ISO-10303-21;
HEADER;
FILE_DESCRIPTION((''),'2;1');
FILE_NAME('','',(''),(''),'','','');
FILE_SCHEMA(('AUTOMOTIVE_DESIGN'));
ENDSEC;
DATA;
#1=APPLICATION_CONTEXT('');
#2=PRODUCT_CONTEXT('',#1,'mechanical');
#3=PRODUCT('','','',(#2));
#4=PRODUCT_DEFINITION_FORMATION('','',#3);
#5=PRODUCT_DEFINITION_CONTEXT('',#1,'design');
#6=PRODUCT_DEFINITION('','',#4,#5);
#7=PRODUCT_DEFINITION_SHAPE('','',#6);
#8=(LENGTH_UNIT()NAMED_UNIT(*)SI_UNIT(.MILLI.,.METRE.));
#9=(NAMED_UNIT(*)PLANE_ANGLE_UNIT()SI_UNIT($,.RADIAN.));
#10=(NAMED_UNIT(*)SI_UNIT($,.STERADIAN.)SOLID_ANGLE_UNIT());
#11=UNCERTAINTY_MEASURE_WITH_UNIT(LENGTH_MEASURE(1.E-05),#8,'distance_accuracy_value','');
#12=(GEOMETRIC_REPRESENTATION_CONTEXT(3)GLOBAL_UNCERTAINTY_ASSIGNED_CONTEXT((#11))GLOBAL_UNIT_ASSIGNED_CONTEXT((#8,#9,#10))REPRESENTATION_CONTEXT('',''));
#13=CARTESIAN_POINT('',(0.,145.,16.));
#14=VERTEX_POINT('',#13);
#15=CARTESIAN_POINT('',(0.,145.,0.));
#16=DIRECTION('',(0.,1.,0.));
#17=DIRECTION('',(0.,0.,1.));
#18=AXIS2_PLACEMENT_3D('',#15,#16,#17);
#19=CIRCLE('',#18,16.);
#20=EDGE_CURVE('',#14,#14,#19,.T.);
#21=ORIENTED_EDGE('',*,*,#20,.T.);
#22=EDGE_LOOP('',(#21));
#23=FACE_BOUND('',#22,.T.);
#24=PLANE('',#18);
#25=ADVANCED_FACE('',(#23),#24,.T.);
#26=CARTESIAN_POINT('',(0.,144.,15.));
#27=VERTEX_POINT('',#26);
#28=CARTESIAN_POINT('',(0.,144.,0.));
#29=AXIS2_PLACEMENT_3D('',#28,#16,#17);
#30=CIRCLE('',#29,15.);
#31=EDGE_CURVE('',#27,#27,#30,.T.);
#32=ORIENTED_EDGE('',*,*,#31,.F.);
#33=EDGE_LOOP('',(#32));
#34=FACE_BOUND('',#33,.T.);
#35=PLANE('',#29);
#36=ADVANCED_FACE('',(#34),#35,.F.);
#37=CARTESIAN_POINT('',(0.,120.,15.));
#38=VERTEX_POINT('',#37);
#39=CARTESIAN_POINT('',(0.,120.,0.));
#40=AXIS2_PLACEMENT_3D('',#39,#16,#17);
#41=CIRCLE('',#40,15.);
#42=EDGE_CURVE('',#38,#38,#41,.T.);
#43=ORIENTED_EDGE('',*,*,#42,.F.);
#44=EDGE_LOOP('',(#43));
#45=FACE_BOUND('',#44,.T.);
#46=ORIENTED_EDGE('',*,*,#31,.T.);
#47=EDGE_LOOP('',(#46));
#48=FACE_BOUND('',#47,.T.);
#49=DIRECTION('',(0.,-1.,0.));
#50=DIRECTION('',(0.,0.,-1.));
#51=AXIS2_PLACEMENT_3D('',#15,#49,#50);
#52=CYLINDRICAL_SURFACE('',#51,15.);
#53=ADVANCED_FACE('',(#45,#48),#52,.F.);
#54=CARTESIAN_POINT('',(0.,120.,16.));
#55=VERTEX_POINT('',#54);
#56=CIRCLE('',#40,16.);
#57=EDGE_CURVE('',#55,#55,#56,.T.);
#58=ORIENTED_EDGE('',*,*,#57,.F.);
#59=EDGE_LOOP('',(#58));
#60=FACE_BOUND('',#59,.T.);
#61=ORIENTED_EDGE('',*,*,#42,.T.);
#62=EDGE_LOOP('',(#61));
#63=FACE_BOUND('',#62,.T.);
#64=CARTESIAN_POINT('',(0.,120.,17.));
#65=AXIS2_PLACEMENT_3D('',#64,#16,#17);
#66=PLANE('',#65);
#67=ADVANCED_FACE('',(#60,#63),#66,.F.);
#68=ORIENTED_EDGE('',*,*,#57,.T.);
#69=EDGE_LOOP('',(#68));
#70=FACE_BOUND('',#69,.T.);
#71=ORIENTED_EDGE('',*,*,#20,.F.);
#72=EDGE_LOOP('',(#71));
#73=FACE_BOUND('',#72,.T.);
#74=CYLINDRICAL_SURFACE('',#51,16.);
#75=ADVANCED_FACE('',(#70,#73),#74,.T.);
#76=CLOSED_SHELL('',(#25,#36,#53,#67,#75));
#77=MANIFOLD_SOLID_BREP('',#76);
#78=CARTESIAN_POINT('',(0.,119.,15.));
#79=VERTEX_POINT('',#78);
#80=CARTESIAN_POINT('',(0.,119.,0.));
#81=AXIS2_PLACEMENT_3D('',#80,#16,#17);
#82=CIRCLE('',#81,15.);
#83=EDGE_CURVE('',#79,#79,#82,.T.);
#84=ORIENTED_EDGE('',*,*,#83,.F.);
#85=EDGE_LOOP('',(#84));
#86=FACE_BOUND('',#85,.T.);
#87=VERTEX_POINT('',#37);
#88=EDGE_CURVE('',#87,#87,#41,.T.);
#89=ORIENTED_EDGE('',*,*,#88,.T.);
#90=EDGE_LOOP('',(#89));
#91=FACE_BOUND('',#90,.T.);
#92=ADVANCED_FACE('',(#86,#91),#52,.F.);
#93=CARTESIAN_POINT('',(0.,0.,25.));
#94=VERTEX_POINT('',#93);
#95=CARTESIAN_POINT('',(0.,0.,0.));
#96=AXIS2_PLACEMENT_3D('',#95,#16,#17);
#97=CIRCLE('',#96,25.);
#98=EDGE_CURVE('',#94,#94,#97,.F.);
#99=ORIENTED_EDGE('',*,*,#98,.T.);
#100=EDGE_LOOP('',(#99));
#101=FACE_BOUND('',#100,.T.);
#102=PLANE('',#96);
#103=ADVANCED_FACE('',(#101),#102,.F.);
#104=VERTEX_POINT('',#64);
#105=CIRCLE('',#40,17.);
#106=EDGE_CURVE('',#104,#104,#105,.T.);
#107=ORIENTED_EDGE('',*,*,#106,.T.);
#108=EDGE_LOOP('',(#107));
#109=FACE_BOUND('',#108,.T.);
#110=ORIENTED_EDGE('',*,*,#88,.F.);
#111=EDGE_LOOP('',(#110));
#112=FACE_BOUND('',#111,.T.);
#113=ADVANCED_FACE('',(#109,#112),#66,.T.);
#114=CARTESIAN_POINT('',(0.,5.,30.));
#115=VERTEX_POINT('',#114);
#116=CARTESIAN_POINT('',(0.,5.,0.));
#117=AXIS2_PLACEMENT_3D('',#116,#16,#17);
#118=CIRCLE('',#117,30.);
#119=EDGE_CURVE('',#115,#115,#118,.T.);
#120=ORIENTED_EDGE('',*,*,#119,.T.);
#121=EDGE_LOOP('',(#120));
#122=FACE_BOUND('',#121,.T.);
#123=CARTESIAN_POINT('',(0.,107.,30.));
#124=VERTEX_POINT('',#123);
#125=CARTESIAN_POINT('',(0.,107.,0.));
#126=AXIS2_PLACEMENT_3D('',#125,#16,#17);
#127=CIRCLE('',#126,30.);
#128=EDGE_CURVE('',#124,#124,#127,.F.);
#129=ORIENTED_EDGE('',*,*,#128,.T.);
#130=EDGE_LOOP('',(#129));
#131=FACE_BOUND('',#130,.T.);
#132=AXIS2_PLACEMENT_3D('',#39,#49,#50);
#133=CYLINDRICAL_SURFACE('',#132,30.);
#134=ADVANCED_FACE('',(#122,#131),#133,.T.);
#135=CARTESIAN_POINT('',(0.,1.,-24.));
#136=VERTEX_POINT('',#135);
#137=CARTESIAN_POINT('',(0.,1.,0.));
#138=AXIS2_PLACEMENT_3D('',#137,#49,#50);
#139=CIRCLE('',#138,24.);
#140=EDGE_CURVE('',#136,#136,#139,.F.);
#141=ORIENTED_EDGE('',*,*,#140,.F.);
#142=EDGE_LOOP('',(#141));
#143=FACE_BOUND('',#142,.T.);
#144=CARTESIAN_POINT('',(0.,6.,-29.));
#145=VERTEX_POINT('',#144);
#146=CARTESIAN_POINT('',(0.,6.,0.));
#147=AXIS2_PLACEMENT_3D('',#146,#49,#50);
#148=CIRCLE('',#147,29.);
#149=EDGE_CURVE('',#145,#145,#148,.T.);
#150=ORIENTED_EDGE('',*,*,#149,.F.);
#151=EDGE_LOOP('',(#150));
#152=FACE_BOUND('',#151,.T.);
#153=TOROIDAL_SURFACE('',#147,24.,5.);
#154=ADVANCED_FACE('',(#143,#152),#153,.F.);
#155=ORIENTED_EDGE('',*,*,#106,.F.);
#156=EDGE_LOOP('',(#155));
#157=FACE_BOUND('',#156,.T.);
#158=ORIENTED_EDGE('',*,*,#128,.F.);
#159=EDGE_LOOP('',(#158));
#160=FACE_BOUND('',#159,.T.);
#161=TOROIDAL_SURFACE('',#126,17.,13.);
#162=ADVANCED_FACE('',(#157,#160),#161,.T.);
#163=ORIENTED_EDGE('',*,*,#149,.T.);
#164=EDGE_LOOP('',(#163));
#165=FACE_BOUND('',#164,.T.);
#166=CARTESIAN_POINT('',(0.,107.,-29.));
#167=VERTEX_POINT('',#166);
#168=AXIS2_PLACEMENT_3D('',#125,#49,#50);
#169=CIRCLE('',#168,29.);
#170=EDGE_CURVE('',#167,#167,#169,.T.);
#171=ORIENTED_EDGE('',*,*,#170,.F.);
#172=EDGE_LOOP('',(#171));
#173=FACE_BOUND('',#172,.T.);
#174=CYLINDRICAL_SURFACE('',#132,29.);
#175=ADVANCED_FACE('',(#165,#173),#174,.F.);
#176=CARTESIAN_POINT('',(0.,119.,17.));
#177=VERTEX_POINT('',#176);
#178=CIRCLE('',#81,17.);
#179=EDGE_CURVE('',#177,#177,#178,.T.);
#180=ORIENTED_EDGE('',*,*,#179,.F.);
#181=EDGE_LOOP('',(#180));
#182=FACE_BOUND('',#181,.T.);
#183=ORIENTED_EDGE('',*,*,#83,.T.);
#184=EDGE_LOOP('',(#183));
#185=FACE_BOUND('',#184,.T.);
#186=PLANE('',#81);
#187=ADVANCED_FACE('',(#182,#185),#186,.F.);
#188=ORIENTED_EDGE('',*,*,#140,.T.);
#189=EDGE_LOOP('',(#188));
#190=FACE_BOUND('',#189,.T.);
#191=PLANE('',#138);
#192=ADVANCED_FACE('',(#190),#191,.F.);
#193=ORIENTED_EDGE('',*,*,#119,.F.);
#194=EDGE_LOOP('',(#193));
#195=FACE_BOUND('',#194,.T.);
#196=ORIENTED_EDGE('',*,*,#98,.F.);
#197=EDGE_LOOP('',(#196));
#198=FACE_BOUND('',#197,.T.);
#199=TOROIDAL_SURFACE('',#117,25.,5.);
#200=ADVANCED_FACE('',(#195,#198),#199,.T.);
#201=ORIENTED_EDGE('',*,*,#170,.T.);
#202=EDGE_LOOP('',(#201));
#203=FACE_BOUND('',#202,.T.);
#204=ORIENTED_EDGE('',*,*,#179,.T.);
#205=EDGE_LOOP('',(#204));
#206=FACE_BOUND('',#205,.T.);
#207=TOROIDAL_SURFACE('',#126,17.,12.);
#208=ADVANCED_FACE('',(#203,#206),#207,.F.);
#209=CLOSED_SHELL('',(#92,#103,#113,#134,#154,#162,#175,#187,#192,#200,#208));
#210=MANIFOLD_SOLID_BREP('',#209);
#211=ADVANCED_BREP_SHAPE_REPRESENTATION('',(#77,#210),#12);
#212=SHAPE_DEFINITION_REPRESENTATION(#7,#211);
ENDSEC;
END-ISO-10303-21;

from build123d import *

# Parameters (mm, degrees)
SKETCH1_R           = 30
BOSS_EXTRUDE1_DEPTH = 120
SKETCH2_R           = 16
BOSS_EXTRUDE2_DEPTH = 25
FILLET1_R           = 13
SHELL2_T            = -1
SKETCH3_R           = 30
BOSS_EXTRUDE3_DEPTH = 1
FILLET2_R           = 5


with BuildPart() as part:
    # Sketch1 → Boss-Extrude1 (new body)
    with BuildSketch(Plane(origin=(0, 0, 0), x_dir=(1, 0, 0), z_dir=(0, 1, 0))):
        Circle(SKETCH1_R)
    extrude(amount=BOSS_EXTRUDE1_DEPTH)

    # Sketch2 → Boss-Extrude2 (add)
    with BuildSketch(Plane(origin=(0, 120, 0), x_dir=(1, 0, 0), z_dir=(0, 1, 0))):
        Circle(SKETCH2_R)
    extrude(amount=BOSS_EXTRUDE2_DEPTH)

    # Fillet1
    fillet1_edges = [part.edges().sort_by_distance(p)[0] for p in [
        (-30, 120, 0),
    ]]
    fillet(fillet1_edges, radius=FILLET1_R)

    # Shell2
    shell2_openings = [part.faces().sort_by_distance(p)[0] for p in [
        (0, 0, 0),
    ]]
    offset(amount=SHELL2_T, openings=shell2_openings, kind=Kind.INTERSECTION)

    # Sketch3 → Boss-Extrude3 (add)
    with BuildSketch(Plane.XZ):
        Circle(SKETCH3_R)
    extrude(amount=-BOSS_EXTRUDE3_DEPTH)


with BuildPart() as body_2:
    # Split1: the piece on the far side of the plane
    add(part.part)
    split(bisect_by=Plane.ZX.offset(120), keep=Keep.BOTTOM)

    # Fillet2
    fillet2_edges = [body_2.edges().sort_by_distance(p)[0] for p in [
        (-30, 0, 0),
        (-29, 1, 0),
    ]]
    fillet(fillet2_edges, radius=FILLET2_R)


with BuildPart() as part_1:
    add(part.part)

    # Split1
    split(bisect_by=Plane.ZX.offset(120), keep=Keep.TOP)


solid = Compound([body_2.part, part_1.part])
